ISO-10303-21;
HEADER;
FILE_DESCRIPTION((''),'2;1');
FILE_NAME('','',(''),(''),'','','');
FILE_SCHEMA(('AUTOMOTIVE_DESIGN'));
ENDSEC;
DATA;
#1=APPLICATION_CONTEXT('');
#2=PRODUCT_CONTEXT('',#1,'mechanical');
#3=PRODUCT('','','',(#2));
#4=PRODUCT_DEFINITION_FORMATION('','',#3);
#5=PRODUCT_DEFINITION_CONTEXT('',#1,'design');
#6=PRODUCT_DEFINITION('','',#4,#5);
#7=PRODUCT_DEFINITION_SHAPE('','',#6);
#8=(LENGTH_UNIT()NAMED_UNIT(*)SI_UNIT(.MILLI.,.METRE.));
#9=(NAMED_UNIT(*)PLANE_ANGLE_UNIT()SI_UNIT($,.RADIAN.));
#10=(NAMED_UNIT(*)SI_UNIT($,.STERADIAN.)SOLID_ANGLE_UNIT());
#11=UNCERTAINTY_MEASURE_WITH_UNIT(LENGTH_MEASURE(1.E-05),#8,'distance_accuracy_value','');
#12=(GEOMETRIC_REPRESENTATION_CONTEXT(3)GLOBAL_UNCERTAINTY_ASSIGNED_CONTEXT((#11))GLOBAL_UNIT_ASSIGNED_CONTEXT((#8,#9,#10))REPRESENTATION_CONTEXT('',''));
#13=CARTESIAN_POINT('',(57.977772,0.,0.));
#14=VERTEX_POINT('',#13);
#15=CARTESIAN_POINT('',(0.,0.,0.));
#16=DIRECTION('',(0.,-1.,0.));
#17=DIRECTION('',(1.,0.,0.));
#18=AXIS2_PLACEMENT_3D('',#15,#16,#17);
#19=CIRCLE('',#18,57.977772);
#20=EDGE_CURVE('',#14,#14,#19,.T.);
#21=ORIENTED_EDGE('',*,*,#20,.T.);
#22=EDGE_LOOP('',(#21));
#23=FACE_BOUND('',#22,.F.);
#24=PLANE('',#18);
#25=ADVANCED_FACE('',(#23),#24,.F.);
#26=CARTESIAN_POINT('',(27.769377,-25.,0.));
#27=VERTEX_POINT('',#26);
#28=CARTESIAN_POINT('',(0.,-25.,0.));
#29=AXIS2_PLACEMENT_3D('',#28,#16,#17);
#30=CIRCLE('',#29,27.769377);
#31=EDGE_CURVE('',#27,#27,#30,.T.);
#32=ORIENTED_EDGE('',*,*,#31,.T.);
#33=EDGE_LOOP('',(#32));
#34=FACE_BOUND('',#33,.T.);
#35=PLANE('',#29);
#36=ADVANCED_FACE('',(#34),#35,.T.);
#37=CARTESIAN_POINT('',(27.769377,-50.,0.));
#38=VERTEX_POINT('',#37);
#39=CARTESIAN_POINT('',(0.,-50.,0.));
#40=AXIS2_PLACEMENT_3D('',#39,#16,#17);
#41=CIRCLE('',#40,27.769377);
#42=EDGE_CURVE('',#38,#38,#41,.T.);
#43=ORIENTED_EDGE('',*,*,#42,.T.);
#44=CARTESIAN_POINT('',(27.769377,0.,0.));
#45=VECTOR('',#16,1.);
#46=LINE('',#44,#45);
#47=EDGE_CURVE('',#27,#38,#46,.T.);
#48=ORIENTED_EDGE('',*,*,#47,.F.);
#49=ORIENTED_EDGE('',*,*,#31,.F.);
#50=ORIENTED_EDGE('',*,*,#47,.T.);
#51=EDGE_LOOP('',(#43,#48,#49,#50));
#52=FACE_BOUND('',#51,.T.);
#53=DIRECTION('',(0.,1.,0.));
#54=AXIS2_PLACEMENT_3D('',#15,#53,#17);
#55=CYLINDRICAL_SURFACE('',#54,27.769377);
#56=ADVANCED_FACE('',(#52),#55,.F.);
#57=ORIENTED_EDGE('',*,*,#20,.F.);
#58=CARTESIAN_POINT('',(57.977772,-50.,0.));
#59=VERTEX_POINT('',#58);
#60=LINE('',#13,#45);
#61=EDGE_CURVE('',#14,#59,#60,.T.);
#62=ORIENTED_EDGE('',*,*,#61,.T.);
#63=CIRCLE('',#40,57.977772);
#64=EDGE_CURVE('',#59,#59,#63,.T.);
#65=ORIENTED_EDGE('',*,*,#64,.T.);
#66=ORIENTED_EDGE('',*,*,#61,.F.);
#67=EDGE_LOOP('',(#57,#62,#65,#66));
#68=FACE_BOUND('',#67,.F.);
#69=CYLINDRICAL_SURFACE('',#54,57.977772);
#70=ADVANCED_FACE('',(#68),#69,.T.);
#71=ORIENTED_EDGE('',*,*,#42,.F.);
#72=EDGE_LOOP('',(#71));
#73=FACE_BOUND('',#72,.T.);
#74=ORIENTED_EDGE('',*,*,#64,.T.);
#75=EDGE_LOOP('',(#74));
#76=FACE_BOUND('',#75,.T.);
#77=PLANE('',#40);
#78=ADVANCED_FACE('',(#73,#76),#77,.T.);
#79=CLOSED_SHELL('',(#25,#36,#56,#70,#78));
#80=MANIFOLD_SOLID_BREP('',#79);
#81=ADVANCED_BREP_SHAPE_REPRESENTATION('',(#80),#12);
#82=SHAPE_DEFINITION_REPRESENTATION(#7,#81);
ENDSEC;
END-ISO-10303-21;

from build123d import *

# Parameters (mm, degrees)
F0_R     = 27.7693772329
F1_DEPTH = 25
F0_R_2   = 57.9777716045
F2_DEPTH = 50


# Not quite as in the source:
# - a feature of the source that left no trace in its solid (it failed there, or was rolled back) is left out


with BuildPart() as f1:
    # F0 (on Front) → F1 (new body)
    with BuildSketch(Plane.XZ):
        Circle(F0_R)
    extrude(amount=F1_DEPTH)

    # F0 (on Front) → F2 (join)
    with BuildSketch(Plane.XZ):
        Circle(F0_R_2)
        Circle(F0_R, mode=Mode.SUBTRACT)
    extrude(amount=F2_DEPTH)


solid = f1.part
